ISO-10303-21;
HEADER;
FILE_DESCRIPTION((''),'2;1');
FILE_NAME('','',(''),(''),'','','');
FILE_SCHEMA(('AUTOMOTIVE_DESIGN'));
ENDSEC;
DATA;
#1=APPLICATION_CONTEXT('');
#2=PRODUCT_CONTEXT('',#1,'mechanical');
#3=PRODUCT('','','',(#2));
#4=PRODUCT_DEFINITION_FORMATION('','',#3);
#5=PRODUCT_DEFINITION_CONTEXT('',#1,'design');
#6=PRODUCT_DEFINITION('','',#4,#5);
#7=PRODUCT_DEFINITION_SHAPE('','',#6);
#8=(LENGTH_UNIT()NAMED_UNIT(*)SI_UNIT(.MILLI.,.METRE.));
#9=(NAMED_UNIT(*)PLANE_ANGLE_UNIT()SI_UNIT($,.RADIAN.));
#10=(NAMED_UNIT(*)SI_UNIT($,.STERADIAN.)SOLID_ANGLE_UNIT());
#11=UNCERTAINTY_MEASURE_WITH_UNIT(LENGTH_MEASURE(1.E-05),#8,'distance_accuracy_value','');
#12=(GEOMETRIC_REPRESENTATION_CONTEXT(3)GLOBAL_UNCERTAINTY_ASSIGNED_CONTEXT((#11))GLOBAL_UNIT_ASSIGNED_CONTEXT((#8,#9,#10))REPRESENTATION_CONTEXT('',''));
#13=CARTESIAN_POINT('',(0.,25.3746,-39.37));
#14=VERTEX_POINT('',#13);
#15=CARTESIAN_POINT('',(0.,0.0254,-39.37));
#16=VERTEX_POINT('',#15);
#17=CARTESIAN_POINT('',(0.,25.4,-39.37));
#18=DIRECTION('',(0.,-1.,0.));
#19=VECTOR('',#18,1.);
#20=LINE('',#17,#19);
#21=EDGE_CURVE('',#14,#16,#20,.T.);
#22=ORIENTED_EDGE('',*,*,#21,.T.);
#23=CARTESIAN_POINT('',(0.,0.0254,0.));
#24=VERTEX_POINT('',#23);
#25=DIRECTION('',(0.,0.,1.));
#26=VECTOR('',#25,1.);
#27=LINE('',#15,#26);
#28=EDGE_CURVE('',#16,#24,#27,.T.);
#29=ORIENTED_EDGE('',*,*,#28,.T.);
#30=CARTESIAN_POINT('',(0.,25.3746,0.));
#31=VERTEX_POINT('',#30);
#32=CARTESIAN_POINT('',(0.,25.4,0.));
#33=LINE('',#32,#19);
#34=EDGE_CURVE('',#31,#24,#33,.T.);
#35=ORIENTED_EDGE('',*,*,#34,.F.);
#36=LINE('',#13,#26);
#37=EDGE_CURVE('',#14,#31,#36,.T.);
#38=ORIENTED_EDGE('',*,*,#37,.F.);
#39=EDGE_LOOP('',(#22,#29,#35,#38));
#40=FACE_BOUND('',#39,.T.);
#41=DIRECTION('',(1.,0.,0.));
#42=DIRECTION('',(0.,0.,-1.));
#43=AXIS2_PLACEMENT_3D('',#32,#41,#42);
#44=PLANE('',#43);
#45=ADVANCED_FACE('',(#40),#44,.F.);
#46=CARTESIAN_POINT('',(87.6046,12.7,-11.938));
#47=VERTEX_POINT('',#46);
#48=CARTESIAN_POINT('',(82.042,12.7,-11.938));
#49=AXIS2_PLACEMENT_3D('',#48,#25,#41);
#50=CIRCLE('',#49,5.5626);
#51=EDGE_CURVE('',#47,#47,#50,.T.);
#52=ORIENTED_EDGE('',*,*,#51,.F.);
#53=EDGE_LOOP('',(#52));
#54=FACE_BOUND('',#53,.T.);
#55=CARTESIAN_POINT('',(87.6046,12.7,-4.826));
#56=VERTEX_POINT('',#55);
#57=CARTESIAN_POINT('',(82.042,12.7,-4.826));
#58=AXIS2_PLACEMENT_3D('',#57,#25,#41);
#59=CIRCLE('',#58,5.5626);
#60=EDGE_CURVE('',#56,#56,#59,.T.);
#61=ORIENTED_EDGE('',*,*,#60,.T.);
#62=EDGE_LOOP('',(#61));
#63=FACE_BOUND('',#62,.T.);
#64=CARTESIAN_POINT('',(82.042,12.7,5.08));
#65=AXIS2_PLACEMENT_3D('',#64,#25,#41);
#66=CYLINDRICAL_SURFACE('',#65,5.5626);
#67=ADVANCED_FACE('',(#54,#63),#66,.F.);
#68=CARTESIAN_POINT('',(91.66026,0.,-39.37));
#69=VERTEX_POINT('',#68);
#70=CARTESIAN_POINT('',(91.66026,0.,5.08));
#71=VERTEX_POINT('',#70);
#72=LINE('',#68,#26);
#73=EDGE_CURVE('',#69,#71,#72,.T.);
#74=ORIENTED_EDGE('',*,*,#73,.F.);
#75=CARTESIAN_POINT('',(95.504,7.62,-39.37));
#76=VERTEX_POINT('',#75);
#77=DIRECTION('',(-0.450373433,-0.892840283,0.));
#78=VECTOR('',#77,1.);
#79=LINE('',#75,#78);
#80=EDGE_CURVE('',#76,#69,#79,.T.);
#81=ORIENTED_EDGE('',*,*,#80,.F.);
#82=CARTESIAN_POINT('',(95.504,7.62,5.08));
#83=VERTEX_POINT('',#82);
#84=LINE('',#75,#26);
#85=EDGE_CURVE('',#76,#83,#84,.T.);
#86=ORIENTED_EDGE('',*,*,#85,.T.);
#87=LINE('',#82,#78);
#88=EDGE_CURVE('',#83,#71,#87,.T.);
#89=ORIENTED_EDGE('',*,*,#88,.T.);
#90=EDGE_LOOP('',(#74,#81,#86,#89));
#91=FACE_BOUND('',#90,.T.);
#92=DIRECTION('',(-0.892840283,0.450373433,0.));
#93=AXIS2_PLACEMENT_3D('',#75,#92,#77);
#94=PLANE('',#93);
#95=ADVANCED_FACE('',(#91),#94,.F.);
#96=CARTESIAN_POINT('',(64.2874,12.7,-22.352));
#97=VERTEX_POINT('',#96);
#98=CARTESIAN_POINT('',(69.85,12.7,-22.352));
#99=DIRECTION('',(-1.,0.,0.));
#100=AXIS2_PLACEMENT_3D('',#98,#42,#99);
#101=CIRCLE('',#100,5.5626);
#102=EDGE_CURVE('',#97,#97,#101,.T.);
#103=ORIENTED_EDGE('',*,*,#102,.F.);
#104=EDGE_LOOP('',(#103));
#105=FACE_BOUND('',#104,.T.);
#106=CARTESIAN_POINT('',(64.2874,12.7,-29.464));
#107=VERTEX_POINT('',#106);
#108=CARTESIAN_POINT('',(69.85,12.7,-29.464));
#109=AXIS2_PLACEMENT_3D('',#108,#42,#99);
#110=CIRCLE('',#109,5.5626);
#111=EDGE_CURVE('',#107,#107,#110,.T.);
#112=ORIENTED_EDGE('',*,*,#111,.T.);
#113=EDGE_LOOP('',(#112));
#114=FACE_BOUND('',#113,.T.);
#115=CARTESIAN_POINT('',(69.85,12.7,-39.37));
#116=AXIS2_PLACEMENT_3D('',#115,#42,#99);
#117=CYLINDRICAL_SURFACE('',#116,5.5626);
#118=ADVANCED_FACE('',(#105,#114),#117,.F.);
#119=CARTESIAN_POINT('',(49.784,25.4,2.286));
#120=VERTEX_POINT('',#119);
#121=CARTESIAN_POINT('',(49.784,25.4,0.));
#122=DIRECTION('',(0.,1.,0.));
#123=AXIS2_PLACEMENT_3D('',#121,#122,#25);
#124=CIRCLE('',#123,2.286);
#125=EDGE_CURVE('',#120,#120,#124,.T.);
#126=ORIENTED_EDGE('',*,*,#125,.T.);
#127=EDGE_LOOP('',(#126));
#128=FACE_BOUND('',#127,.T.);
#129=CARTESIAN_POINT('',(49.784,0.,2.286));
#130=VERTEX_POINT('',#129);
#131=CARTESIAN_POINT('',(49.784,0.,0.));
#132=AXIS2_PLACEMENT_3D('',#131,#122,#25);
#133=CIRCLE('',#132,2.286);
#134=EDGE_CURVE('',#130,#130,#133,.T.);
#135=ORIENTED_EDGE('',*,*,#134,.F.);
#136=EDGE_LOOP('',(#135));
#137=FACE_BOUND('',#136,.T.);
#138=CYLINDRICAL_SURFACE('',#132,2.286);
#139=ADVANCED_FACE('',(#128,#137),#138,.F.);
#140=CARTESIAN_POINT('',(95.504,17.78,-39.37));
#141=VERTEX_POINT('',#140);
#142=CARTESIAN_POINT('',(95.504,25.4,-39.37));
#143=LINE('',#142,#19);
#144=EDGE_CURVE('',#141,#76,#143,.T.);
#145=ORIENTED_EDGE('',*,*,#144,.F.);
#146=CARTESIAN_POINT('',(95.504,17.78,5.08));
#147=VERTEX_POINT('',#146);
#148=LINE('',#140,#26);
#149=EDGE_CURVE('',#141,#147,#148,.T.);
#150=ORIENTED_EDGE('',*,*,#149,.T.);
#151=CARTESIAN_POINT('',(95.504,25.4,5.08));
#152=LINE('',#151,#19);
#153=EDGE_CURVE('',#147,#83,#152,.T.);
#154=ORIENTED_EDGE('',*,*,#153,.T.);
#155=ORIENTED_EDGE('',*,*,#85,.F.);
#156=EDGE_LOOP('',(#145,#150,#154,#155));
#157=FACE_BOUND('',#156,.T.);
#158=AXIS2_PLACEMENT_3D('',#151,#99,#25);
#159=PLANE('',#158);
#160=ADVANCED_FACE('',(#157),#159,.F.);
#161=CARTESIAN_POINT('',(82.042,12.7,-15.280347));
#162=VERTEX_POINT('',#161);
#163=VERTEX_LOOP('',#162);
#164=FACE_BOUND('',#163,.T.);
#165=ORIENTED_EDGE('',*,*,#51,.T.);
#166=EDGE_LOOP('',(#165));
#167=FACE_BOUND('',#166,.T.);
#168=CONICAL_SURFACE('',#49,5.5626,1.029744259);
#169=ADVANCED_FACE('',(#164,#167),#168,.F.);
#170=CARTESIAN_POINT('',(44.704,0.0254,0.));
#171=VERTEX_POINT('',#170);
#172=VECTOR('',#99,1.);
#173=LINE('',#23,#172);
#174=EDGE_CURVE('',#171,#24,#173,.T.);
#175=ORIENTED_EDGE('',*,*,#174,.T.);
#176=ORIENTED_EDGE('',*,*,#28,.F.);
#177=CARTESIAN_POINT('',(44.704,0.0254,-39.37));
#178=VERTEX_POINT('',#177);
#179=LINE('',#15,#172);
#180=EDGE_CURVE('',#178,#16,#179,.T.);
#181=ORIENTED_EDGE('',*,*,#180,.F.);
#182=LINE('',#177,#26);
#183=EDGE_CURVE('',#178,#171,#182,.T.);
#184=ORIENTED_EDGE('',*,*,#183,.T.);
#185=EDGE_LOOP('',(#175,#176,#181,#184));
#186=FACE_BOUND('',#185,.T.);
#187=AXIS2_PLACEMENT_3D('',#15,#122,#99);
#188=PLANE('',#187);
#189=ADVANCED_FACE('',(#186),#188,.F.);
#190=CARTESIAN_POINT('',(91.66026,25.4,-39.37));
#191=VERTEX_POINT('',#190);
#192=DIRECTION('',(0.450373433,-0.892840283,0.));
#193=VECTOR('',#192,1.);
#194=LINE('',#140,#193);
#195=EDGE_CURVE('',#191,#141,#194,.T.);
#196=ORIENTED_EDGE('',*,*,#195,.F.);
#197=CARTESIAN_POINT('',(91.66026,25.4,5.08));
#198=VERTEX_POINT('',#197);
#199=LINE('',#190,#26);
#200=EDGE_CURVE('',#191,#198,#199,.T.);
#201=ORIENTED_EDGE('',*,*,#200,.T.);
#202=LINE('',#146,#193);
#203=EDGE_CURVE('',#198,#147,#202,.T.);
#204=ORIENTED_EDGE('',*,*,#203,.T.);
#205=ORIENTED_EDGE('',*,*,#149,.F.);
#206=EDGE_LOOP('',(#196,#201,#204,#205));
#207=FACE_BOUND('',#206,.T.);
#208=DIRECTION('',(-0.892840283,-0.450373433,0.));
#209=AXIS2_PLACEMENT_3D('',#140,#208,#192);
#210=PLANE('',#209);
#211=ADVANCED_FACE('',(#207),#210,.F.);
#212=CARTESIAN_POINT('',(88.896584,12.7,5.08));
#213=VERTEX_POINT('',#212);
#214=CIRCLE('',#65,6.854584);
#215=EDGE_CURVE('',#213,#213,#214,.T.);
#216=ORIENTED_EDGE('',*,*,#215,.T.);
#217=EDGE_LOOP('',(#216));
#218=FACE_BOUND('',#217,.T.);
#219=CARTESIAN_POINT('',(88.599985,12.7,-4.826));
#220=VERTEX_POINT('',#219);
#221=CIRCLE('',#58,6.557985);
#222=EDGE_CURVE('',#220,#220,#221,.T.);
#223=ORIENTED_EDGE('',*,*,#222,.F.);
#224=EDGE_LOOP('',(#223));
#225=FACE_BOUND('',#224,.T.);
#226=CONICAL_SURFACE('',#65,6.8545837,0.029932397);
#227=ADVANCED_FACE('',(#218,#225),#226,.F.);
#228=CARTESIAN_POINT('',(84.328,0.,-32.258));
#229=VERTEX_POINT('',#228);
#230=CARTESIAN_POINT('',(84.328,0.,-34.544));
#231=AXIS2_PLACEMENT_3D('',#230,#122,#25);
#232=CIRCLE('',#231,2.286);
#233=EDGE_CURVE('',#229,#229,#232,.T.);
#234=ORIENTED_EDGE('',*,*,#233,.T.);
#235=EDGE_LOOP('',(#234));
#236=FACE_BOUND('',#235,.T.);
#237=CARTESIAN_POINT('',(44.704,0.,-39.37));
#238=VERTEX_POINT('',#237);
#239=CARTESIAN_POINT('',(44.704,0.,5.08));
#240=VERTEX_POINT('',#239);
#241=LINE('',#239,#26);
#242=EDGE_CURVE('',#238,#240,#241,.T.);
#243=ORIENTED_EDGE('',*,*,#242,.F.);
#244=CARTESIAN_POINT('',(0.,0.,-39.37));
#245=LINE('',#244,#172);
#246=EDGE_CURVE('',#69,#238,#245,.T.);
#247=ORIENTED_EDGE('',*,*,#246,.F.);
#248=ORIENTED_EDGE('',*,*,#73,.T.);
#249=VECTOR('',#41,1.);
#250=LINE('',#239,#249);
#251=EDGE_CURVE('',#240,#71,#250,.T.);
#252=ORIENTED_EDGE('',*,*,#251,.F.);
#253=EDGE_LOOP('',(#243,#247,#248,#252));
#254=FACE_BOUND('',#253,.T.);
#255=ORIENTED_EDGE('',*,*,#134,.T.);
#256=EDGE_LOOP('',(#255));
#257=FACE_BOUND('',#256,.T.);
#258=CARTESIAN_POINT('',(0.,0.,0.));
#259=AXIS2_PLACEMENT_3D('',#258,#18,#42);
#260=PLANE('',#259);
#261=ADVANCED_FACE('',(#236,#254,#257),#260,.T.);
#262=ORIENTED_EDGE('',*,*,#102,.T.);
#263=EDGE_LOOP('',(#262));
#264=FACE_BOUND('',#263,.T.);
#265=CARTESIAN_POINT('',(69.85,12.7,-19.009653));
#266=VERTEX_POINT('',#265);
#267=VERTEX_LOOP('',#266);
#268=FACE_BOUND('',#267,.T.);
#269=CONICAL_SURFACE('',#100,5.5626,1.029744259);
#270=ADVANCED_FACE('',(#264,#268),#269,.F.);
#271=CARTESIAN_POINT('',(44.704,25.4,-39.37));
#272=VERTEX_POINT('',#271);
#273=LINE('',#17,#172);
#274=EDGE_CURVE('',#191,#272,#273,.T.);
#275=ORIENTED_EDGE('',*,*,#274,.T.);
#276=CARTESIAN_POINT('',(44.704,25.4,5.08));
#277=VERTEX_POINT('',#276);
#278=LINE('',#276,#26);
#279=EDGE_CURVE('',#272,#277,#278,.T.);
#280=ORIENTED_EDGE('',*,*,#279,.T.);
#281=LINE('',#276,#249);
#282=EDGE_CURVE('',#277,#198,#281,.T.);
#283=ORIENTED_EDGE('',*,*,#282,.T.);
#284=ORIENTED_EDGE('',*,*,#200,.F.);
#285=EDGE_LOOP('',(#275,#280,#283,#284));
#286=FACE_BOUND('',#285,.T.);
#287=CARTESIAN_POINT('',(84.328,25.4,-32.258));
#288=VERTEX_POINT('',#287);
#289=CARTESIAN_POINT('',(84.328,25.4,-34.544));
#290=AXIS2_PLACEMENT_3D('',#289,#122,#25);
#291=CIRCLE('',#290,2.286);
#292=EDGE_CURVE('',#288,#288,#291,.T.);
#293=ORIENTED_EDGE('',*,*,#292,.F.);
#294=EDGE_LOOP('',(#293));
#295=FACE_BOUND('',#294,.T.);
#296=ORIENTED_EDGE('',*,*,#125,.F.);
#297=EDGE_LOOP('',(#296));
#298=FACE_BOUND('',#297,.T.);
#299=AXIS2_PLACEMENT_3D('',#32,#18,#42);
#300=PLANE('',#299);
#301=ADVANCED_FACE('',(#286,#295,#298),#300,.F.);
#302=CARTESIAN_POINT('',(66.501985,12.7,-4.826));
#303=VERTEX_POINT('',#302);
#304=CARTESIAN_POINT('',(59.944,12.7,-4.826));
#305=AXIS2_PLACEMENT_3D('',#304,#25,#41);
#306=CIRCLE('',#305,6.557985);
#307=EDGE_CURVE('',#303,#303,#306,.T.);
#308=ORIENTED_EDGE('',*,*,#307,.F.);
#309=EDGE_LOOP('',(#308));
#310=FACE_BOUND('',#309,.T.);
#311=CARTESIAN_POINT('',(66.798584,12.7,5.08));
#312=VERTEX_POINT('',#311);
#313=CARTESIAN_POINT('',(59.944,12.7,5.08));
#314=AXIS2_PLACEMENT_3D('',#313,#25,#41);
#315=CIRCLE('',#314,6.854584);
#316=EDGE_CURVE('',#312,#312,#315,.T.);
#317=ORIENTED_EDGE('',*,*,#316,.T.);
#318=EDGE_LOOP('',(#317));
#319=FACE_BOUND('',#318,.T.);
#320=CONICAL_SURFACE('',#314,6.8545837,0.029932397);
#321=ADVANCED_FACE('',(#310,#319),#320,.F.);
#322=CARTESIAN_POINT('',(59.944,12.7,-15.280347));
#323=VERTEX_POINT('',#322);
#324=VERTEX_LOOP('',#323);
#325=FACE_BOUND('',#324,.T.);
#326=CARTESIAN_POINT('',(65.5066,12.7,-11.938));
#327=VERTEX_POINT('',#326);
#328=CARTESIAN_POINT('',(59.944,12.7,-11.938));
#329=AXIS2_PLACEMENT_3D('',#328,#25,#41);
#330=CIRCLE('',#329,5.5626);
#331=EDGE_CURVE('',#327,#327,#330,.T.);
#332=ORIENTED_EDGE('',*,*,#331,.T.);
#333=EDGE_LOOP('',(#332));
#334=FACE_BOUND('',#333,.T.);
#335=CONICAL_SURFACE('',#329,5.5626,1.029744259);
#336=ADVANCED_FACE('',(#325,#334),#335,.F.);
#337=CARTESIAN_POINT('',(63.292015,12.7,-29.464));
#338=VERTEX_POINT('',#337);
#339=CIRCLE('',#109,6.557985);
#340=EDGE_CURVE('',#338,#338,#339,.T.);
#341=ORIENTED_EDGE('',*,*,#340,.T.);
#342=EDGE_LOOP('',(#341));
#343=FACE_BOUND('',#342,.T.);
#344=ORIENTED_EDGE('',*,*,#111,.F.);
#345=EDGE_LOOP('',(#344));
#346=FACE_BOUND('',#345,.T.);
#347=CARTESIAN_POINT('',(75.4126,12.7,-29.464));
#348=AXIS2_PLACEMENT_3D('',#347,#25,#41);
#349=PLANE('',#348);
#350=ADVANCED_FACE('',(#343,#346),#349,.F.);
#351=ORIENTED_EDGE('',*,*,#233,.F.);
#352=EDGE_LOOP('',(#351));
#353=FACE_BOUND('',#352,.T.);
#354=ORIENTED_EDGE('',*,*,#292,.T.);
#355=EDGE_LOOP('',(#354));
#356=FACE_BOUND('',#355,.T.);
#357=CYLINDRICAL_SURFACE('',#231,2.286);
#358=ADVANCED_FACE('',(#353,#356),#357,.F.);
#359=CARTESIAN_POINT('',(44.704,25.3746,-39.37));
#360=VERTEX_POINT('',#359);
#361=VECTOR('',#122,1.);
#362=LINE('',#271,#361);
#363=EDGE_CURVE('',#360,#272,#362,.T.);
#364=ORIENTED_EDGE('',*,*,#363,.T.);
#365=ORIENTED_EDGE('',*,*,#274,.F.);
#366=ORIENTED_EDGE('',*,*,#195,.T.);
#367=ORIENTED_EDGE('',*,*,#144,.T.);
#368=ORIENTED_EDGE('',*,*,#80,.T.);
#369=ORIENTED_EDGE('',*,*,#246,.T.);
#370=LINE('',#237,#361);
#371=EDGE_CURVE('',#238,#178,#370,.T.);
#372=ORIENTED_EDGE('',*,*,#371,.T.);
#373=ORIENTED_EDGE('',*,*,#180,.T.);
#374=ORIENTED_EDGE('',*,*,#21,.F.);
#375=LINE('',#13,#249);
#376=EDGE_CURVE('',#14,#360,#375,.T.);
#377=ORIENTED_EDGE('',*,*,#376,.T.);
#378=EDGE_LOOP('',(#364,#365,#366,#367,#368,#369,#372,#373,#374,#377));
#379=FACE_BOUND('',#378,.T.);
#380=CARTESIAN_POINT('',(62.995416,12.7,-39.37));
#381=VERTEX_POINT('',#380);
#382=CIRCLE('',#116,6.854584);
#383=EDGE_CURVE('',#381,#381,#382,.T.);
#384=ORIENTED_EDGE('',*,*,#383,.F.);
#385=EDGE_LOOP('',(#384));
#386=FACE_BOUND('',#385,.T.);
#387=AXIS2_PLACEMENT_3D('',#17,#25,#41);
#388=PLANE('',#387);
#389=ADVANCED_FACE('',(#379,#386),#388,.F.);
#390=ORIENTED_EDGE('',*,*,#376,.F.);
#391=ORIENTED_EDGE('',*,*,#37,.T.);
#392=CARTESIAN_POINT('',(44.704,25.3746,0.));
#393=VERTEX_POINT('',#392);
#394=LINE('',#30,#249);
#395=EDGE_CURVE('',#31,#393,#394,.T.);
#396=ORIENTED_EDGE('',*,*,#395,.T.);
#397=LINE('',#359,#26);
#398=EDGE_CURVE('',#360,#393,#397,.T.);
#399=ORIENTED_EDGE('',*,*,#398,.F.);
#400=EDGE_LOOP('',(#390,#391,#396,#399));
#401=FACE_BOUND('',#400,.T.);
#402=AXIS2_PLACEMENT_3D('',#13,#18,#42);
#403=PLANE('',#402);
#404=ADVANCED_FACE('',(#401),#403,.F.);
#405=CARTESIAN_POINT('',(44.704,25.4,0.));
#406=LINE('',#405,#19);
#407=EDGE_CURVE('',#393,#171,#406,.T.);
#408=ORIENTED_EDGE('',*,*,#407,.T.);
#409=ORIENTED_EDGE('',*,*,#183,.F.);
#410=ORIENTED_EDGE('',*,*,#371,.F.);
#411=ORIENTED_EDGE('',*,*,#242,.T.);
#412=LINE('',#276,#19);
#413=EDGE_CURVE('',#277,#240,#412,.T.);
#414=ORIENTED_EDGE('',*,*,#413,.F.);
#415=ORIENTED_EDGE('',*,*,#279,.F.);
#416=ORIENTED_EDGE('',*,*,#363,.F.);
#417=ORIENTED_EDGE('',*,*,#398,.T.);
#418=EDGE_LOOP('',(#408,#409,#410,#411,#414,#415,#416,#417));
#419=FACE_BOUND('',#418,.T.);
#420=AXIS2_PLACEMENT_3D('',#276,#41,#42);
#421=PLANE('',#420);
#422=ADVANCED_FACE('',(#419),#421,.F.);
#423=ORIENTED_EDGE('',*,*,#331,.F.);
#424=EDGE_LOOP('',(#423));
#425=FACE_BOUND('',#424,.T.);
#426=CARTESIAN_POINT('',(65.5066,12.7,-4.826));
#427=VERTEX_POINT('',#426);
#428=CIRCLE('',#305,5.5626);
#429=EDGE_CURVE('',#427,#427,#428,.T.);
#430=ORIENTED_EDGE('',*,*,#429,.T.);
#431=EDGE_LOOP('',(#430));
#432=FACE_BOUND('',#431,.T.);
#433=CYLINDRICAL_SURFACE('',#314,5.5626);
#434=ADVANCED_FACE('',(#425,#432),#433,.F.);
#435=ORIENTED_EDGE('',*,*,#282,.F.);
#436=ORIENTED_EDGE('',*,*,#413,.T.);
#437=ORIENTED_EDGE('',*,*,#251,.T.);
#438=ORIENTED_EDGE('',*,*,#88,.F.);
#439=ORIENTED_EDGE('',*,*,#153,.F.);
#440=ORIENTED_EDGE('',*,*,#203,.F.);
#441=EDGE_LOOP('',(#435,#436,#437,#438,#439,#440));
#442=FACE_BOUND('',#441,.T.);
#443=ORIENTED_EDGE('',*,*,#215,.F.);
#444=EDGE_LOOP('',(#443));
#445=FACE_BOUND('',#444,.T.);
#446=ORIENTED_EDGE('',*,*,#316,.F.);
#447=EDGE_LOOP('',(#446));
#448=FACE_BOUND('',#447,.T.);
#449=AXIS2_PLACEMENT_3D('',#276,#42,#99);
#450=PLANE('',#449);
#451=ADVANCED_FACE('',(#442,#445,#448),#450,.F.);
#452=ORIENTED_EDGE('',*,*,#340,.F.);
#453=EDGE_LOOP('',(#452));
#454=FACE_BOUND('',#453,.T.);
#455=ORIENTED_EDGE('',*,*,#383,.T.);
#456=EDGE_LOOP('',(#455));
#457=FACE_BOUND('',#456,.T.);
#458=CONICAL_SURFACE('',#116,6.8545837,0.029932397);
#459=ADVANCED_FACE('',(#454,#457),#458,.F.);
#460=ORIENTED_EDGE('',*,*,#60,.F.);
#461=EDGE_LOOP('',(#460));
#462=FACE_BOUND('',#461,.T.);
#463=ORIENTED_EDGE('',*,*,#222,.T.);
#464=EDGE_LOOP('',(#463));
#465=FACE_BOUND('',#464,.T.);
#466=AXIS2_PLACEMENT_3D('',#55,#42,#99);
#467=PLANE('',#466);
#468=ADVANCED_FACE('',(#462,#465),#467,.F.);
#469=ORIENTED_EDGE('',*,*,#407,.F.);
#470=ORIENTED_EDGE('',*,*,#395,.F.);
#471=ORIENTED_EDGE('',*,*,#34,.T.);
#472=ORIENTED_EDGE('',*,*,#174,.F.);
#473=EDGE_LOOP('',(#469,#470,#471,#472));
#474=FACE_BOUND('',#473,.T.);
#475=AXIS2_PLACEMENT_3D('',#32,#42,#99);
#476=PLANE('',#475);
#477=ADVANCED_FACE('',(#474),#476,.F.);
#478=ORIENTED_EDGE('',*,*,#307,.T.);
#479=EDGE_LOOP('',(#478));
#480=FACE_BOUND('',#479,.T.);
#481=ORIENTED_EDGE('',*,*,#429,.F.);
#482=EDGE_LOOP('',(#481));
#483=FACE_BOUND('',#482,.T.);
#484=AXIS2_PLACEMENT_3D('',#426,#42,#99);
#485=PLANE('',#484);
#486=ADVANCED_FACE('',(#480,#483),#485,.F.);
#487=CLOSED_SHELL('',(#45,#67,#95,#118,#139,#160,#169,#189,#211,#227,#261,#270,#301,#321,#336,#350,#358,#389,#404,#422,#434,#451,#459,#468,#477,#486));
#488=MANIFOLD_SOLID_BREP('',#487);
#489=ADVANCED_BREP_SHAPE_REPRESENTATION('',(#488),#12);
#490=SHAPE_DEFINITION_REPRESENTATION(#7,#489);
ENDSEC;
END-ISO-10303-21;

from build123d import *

# Parameters (mm, degrees)
BOSS_EXTRUDE1_DEPTH = 25.4
SKETCH2_W           = 44.704
SKETCH2_H           = 0.0254
CUT_EXTRUDE1_DEPTH  = 107.377492525
SKETCH3_R           = 2.286
CUT_EXTRUDE2_DEPTH  = 107.377492525
CUT_EXTRUDE3_DEPTH  = 109.360401051


# Read off the part's stored shape, not the designer's step: 1/4 NPT Tapped Hole1
with BuildPart() as part:
    # Sketch1 → Boss-Extrude1 (new body)
    with BuildSketch(Plane(origin=(0, 0, 0), x_dir=(1, 0, 0), z_dir=(0, 1, 0))):
        Polygon((44.704, -5.08), (95.504, -5.08), (95.504, 39.37), (0, 39.37), (0, 0), (44.704, 0), align=None)
    extrude(amount=BOSS_EXTRUDE1_DEPTH)

    # Sketch2 → Cut-Extrude1 (cut, through all)
    with BuildSketch(Plane.XY):
        with Locations((22.352, 25.3873)):
            Rectangle(SKETCH2_W, SKETCH2_H)
        with Locations((22.352, 0.0127)):
            Rectangle(SKETCH2_W, SKETCH2_H)
    extrude(amount=-CUT_EXTRUDE1_DEPTH, mode=Mode.SUBTRACT)

    # Sketch3 → Cut-Extrude2 (cut, through all)
    with BuildSketch(Plane(origin=(0, 25.4, 0), x_dir=(1, 0, 0), z_dir=(0, 1, 0))):
        with Locations(Location((49.784, 0, 0), (0, 0, 270))):
            Circle(SKETCH3_R)
        with Locations(Location((84.328, 34.544, 0), (0, 0, 270))):
            Circle(SKETCH3_R)
    extrude(amount=-CUT_EXTRUDE2_DEPTH, mode=Mode.SUBTRACT)

    # 1/4 NPT Tapped Hole1 outline → 1/4 NPT Tapped Hole1 (revolve, cut)
    with BuildSketch(Plane(origin=(69.85, 12.7, 0), x_dir=(1, 0, 0), z_dir=(0, -1, 0))):
        Polygon((5.5626, -22.352), (0, -19.009652721), (0, -39.37), (6.8545837, -39.37), (6.557984794, -29.464), (5.5626, -29.464), align=None)
    revolve(axis=Axis((69.85, 12.7, 0), (0, 0, 1)), mode=Mode.SUBTRACT)

    # 1_4 NPT Tapped Hole1 2 outline → 1_4 NPT Tapped Hole1 2 (revolve, cut)
    with BuildSketch(Plane(origin=(82.042, 12.7, 0), x_dir=(1, 0, 0), z_dir=(0, -1, 0))):
        Polygon((0, 5.08), (0, -15.280347279), (5.5626, -11.938), (5.5626, -4.826), (6.557984794, -4.826), (6.8545837, 5.08), align=None)
    revolve(axis=Axis((82.042, 12.7, 0), (0, 0, 1)), mode=Mode.SUBTRACT)

    # 1_4 NPT Tapped Hole1 3 outline → 1_4 NPT Tapped Hole1 3 (revolve, cut)
    with BuildSketch(Plane(origin=(59.944, 12.7, 0), x_dir=(1, 0, 0), z_dir=(0, -1, 0))):
        Polygon((6.8545837, 5.08), (0, 5.08), (0, -15.280347279), (5.5626, -11.938), (5.5626, -4.826), (6.557984794, -4.826), align=None)
    revolve(axis=Axis((59.944, 12.7, 0), (0, 0, 1)), mode=Mode.SUBTRACT)

    # Sketch7 → Cut-Extrude3 (cut, through all)
    with BuildSketch(Plane.XY.offset(5.08)):
        Polygon((95.504, 25.4), (95.504, 17.78), (91.660260387, 25.4), align=None)
        Polygon((91.660260387, 0), (95.504, 0), (95.504, 7.62), align=None)
    extrude(amount=-CUT_EXTRUDE3_DEPTH, mode=Mode.SUBTRACT)


solid = part.part
